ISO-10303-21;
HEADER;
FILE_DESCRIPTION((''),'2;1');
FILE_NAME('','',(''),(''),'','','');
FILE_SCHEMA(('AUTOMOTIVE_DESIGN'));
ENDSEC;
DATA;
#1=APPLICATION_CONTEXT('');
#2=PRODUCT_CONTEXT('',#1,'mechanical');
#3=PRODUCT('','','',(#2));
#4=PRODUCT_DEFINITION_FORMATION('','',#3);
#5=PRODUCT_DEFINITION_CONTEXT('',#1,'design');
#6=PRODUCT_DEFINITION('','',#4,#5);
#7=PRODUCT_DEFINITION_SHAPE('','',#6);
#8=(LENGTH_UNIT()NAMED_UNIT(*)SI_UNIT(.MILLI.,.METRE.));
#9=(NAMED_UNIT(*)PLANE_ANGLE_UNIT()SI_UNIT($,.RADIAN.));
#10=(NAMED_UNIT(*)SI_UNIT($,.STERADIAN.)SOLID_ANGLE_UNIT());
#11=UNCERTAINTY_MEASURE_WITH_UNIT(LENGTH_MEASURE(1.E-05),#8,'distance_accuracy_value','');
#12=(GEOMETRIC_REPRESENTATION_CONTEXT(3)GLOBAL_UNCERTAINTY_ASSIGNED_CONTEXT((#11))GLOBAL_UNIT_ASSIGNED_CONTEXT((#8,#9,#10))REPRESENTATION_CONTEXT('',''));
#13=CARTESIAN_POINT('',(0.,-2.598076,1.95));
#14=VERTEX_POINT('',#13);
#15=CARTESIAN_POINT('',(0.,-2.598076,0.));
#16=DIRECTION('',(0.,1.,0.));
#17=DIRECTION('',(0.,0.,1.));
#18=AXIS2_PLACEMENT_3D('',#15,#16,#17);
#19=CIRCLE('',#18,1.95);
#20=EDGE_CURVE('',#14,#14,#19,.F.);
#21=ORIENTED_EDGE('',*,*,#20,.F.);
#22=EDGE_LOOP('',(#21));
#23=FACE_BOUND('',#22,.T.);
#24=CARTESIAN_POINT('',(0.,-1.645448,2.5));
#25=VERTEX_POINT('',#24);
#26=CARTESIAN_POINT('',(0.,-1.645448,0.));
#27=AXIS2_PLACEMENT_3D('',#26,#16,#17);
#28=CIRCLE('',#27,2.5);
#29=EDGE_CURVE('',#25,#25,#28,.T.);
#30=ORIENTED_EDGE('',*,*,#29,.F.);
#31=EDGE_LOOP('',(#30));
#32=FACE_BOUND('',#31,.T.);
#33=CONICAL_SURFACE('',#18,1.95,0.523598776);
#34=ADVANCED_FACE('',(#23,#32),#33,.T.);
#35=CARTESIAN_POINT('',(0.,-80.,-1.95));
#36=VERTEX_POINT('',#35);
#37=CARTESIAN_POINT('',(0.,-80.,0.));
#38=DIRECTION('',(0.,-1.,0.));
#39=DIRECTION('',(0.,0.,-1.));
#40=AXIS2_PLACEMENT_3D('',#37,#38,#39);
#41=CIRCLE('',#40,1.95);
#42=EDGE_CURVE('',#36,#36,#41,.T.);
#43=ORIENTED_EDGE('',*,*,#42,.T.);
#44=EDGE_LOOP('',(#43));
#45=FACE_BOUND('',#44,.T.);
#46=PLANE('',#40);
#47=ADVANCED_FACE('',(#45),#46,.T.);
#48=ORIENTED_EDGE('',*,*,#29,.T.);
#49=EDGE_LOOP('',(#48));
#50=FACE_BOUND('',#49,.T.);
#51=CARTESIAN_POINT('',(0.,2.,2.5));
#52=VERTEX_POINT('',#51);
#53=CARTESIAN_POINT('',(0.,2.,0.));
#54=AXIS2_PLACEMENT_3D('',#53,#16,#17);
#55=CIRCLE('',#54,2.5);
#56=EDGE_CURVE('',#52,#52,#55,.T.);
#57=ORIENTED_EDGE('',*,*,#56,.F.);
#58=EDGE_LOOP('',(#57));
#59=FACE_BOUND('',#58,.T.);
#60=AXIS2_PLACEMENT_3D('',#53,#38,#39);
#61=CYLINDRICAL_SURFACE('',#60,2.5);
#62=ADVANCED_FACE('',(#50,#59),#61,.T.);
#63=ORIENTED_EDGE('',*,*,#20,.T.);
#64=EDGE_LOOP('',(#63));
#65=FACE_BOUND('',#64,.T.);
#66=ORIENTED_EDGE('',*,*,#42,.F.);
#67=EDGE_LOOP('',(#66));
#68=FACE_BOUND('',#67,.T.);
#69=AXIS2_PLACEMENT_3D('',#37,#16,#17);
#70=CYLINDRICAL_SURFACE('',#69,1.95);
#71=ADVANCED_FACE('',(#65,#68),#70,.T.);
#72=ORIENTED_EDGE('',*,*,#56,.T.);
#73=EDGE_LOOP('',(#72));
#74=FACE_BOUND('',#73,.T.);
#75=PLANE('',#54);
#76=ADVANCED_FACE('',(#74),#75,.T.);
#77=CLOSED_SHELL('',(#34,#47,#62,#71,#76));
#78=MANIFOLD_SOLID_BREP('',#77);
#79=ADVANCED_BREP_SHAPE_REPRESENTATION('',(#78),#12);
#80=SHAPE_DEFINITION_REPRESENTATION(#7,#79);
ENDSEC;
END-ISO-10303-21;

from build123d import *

# Parameters (mm, degrees)
SKETCH_1_R       = 2.5
EXTRUDE_1_DEPTH  = 2
SKETCH_2_R       = 1.95
EXTRUDE_2_DEPTH  = 80
CHAMFER_1_SIZE   = 1.5
CHAMFER_1_SIZE_2 = 2.598076211


with BuildPart() as part:
    # 草图1 → 凸台-拉伸1 (new body)
    with BuildSketch(Plane(origin=(0, 0, 0), x_dir=(1, 0, 0), z_dir=(0, 1, 0))):
        with Locations(Location((0, 0, 0), (0, 0, 270))):
            Circle(SKETCH_1_R)
    extrude(amount=EXTRUDE_1_DEPTH)

    # 草图2 → 凸台-拉伸2 (add)
    with BuildSketch(Plane.XZ):
        with Locations(Location((0, 0, 0), (0, 0, 270))):
            Circle(SKETCH_2_R)
    extrude(amount=EXTRUDE_2_DEPTH)

    # 倒角1
    # the kernel refuses this chamfer: 2.598076211, 1.5 mm, written as the material it adds along each edge
    with BuildSketch(Plane(origin=(0, 0, 0), x_dir=(0, 0, -1), z_dir=(-1, 0, 0))) as chamfer_1_piece_1_section:
        Polygon((1.95 + CHAMFER_1_SIZE, 0), (1.95, CHAMFER_1_SIZE_2), (1.95, 0), align=None)
    chamfer_1_piece_1 = revolve(axis=Axis((0, 0, 0), (0, -1, 0)), mode=Mode.PRIVATE)
    chamfer_1_piece_1 = chamfer_1_piece_1 & Plane(origin=(0, -2.153550613, 0), x_dir=(0, 0, 1), z_dir=(0, -1, 0)) * Cylinder(2.5, 14, mode=Mode.PRIVATE)
    add(chamfer_1_piece_1)


solid = part.part
